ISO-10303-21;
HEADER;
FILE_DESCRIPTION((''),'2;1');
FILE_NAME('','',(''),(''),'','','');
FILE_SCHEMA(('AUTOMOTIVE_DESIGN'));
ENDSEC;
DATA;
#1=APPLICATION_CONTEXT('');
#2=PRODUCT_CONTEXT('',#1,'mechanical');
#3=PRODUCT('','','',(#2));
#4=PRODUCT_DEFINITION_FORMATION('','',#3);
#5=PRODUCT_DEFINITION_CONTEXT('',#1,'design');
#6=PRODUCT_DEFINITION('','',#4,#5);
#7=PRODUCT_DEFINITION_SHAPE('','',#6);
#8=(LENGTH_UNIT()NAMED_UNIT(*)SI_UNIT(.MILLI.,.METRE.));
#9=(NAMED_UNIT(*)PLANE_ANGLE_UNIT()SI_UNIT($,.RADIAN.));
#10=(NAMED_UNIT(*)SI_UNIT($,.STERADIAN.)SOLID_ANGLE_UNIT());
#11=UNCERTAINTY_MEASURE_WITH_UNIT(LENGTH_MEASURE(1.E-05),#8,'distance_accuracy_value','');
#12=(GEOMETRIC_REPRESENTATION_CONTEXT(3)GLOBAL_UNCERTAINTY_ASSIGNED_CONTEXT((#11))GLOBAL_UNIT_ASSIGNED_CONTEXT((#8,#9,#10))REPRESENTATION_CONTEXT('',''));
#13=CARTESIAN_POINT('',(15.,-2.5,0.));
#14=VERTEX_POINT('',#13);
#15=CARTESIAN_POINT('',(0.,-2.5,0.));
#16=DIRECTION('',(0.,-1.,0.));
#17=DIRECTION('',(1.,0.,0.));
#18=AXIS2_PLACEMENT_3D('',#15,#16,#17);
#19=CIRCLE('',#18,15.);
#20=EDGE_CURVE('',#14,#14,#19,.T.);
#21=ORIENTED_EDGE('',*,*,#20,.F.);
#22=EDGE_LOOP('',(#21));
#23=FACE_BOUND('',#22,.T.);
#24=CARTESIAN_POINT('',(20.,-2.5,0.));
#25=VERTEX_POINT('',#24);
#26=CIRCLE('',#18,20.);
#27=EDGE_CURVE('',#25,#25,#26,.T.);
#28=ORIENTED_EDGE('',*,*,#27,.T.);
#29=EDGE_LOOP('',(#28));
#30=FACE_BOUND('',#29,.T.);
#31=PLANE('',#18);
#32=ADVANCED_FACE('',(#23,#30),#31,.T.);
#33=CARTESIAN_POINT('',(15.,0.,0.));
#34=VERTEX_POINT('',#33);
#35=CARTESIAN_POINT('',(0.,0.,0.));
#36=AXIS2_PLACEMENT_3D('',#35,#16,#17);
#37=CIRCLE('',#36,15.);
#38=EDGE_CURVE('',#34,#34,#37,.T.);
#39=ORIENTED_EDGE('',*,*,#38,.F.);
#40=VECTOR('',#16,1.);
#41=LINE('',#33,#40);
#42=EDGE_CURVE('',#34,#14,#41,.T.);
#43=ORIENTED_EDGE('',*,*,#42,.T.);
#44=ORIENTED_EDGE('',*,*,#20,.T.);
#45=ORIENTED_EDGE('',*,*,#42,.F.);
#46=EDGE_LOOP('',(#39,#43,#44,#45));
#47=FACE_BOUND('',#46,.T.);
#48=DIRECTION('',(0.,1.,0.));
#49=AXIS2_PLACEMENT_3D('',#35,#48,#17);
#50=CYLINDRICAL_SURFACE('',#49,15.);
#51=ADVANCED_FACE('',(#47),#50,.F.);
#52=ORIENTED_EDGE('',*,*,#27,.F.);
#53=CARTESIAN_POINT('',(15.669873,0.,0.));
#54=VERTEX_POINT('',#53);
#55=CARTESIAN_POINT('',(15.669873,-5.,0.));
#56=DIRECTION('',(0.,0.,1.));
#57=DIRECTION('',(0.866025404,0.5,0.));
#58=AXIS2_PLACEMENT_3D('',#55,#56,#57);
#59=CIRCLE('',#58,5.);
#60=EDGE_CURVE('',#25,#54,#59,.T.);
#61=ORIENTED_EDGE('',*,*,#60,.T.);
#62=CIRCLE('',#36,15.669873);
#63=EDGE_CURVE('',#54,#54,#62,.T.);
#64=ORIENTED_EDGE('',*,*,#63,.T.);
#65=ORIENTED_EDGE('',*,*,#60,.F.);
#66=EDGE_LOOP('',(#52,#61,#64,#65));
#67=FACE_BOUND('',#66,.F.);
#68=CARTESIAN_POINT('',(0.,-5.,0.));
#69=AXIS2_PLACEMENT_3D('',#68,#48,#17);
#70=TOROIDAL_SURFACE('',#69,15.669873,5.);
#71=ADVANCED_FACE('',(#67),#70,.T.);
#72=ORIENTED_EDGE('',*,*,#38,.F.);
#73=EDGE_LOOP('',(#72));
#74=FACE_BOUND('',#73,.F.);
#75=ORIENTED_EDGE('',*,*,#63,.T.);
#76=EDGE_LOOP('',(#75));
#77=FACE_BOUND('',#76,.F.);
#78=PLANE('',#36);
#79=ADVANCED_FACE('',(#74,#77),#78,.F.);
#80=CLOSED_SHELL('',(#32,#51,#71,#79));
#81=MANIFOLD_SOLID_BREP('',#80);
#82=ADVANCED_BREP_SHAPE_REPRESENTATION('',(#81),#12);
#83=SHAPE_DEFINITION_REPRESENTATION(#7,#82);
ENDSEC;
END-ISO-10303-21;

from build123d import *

# Parameters (mm, degrees)
F0_R     = 20
F0_R_2   = 15
F1_DEPTH = 2.5


# Not quite as in the source:
# - a fillet or chamfer that OpenCascade refuses, or shapes differently, is made with other operations: its cross-section is extruded or revolved along the edge and cut away or added


with BuildPart() as f1:
    # F0 (on Front) → F1 (new body)
    with BuildSketch(Plane.XZ):
        Circle(F0_R)
        Circle(F0_R_2, mode=Mode.SUBTRACT)
    extrude(amount=F1_DEPTH)

    # F2: fillet of radius 5 on 1 edges, made by hand

    # F2_s1 → F2_t2 (revolve, cut)
    with BuildSketch(Plane.XY):
        with BuildLine():
            ThreePointArc((20, -2.5), (18.1698729811, -0.6698729811), (15.6698729811, 0))
            Line((15.6698729811, 0), (20, 0))
            Line((20, 0), (20, -2.5))
        make_face()
    revolve(axis=Axis((0, 0, 0), (0, -1, 0)), mode=Mode.SUBTRACT)


solid = f1.part
